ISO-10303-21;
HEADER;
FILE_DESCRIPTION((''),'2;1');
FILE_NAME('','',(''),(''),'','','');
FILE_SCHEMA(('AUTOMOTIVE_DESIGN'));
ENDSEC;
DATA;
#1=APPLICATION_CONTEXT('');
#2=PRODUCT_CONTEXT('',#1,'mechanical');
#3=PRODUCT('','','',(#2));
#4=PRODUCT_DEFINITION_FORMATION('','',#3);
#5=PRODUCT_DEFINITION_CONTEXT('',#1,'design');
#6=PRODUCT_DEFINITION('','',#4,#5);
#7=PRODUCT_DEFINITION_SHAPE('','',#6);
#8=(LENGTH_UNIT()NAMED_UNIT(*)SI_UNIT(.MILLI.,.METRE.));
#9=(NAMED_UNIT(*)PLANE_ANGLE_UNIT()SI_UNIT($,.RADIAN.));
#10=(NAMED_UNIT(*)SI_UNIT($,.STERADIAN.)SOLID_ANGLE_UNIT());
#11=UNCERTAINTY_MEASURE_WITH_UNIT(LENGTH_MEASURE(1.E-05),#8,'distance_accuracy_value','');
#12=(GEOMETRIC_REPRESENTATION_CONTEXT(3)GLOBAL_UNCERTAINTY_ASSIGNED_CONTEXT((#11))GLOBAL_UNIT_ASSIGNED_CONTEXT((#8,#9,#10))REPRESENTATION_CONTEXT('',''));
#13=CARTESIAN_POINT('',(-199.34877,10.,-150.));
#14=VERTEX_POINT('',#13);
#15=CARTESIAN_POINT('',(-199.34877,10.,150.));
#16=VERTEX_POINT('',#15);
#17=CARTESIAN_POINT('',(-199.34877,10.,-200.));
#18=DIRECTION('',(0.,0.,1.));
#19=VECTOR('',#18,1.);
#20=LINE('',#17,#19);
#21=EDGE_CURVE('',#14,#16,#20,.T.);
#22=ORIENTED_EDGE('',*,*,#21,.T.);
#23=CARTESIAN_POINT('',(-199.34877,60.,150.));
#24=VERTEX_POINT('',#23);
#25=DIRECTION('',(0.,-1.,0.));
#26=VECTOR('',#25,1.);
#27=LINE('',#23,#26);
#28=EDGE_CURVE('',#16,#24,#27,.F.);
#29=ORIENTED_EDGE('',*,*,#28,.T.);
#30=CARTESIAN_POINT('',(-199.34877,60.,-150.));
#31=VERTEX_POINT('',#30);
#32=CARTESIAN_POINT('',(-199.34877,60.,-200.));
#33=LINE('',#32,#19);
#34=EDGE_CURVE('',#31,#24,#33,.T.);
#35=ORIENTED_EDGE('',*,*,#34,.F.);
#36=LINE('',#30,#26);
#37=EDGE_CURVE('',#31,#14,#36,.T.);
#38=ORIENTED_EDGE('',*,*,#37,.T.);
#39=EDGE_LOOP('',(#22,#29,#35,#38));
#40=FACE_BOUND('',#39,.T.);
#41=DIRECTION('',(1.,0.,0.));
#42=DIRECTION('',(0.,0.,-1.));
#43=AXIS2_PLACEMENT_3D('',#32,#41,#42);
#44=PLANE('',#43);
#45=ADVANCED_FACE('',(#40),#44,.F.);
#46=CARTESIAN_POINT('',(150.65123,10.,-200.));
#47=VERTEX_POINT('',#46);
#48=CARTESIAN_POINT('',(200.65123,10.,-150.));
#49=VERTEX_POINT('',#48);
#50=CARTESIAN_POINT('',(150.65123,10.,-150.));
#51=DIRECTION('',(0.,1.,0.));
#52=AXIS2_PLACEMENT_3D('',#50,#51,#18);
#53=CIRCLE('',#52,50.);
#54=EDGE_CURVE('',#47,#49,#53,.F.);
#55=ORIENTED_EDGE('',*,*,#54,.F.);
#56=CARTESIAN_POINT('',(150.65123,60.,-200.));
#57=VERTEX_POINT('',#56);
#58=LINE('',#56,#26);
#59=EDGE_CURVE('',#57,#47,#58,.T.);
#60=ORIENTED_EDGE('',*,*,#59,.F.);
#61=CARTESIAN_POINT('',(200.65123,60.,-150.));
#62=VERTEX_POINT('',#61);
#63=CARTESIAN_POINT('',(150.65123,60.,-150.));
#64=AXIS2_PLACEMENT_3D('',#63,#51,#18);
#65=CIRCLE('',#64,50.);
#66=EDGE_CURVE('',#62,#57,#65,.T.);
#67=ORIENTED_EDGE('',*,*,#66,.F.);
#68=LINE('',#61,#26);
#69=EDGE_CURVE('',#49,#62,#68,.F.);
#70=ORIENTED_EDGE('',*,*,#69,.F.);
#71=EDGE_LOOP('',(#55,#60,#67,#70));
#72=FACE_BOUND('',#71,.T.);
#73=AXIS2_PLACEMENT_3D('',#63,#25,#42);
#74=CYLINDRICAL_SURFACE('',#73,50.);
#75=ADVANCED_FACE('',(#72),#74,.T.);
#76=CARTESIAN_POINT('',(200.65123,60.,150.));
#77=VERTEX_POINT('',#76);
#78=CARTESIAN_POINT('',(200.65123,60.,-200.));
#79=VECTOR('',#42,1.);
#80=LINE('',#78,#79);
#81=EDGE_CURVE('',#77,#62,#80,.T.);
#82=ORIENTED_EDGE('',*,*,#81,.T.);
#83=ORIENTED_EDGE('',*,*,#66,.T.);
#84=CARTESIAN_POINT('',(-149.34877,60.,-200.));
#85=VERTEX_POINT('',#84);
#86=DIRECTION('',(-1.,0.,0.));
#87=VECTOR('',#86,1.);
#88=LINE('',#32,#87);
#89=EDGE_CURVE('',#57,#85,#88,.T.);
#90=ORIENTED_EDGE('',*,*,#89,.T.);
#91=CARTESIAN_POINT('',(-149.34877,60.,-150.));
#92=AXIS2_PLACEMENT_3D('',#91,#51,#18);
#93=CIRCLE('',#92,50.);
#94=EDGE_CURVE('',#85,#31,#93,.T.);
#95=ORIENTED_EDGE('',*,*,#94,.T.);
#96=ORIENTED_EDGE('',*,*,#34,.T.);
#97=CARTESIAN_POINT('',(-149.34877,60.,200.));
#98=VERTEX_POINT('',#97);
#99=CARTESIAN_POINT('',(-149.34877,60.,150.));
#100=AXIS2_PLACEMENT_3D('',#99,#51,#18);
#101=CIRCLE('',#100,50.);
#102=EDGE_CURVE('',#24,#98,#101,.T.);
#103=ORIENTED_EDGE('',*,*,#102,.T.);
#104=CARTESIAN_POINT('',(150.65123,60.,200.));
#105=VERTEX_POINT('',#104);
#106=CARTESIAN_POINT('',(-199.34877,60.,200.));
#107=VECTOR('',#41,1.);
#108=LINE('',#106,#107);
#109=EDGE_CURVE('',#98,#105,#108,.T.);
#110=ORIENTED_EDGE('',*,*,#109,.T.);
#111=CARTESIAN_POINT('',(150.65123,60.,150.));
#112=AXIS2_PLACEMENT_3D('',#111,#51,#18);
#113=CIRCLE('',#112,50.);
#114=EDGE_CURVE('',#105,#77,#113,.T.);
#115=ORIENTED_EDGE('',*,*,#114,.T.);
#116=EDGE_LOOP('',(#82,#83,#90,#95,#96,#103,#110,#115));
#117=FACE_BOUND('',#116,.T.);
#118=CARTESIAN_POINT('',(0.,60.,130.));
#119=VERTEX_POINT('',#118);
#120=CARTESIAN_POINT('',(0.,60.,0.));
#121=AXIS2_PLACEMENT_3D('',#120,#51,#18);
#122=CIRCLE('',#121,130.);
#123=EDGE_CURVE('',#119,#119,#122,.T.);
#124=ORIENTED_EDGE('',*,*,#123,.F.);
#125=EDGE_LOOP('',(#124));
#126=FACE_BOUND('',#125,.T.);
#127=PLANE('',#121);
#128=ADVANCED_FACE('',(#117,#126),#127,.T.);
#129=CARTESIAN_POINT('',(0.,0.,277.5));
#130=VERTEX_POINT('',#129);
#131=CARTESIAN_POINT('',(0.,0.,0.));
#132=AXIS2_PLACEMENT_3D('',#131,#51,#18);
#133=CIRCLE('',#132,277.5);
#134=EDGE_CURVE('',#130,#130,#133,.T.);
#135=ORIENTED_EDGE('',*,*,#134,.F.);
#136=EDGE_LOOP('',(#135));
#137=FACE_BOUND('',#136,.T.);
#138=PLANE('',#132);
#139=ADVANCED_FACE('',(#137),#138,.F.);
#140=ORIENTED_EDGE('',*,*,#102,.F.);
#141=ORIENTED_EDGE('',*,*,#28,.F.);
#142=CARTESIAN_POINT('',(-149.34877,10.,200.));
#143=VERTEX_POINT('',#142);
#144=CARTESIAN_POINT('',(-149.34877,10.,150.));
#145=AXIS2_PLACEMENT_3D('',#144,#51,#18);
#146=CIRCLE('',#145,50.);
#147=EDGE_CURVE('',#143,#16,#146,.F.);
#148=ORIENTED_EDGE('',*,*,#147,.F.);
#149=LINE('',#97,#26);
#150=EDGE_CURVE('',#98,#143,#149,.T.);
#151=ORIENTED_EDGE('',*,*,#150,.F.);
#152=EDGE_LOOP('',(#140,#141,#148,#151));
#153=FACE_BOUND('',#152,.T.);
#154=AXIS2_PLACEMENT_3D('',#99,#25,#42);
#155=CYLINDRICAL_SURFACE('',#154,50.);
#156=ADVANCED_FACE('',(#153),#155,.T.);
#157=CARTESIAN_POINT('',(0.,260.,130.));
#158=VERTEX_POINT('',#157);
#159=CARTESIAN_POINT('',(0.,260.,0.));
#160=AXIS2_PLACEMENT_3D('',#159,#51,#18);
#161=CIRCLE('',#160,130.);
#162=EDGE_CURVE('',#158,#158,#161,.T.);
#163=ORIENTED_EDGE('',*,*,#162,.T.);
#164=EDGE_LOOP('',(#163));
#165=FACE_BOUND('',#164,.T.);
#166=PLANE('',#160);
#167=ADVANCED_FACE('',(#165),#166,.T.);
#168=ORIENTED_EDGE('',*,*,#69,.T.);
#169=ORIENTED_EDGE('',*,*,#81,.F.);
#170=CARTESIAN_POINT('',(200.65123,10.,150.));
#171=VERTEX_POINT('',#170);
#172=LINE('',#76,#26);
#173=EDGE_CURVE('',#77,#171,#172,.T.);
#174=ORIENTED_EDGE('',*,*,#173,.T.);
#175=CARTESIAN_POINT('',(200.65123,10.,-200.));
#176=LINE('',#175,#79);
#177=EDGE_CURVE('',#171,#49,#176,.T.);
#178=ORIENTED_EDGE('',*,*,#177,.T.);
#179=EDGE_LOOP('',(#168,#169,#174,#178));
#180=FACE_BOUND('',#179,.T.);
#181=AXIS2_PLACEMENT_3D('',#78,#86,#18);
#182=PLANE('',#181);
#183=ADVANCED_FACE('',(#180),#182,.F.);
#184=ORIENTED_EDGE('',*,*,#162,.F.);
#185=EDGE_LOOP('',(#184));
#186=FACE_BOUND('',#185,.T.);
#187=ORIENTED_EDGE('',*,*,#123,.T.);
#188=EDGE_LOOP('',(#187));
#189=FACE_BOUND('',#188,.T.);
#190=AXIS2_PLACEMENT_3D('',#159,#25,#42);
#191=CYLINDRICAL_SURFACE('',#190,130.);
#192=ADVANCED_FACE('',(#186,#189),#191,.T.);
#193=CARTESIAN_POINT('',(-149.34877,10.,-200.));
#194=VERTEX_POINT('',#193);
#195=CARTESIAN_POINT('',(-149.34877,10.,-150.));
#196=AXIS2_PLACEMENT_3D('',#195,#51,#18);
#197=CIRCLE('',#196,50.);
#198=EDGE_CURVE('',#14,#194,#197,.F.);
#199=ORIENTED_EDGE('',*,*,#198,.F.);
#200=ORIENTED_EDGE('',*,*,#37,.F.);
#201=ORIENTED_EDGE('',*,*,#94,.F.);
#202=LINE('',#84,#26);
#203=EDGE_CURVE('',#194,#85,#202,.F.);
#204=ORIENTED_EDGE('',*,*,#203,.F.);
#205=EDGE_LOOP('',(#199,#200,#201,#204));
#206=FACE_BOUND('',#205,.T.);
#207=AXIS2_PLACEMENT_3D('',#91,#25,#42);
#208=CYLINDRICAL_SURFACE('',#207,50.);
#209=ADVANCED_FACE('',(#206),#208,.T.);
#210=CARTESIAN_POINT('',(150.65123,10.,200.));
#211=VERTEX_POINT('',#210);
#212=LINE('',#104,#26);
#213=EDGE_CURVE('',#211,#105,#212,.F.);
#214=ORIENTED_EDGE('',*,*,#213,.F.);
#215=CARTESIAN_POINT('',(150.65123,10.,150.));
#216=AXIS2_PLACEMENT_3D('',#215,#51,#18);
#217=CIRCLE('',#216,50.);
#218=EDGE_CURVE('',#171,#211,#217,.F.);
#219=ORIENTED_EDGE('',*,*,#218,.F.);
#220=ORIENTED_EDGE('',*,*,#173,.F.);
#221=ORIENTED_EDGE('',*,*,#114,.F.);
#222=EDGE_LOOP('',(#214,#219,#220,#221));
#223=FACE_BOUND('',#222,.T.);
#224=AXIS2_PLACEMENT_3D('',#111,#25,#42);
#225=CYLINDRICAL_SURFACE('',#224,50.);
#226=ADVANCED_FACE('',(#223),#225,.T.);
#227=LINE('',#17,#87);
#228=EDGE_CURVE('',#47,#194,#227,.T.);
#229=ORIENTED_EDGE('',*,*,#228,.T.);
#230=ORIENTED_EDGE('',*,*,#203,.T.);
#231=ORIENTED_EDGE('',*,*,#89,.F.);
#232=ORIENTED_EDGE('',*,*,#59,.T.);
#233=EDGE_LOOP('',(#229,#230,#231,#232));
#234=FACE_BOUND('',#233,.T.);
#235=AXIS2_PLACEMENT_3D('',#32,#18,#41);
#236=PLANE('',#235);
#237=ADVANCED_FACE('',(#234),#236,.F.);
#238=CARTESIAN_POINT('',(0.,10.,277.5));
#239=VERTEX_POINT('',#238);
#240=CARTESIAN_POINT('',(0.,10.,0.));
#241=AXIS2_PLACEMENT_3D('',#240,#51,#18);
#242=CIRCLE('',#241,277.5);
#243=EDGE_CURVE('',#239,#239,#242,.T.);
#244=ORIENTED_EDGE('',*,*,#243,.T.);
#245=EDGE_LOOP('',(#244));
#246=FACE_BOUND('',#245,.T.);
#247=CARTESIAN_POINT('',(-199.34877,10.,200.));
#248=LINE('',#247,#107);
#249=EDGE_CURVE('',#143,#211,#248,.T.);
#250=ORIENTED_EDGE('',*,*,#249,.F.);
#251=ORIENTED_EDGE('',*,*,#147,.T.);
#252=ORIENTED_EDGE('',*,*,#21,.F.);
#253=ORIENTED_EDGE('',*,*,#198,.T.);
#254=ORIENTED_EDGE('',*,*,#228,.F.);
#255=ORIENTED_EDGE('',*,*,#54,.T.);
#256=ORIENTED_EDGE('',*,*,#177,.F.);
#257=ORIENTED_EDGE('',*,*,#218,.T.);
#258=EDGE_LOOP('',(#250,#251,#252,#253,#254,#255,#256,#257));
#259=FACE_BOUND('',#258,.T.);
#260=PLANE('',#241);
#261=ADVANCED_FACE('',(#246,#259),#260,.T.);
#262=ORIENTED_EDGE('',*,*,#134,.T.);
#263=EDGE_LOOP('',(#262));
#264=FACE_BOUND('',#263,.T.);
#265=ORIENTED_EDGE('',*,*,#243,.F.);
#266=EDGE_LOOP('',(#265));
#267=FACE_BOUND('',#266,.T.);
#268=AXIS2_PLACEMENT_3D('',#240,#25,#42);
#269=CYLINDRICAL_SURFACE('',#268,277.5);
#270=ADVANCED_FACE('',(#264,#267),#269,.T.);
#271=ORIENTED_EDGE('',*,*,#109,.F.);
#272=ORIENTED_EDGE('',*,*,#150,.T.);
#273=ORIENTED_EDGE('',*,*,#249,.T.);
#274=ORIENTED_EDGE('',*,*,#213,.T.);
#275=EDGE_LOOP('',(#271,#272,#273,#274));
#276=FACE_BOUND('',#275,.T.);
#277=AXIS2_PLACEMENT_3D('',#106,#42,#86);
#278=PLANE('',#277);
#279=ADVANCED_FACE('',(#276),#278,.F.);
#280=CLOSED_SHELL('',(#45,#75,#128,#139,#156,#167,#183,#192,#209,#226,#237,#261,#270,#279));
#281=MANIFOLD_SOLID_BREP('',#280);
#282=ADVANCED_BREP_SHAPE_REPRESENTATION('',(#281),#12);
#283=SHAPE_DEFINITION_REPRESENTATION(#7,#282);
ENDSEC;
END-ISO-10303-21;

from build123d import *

# Parameters (mm, degrees)
SKETCH1_R           = 277.5
BOSS_EXTRUDE1_DEPTH = 10
SKETCH2_W           = 400
SKETCH2_H           = 400
BOSS_EXTRUDE2_DEPTH = 50
FILLET1_R           = 50
SKETCH3_R           = 130
BOSS_EXTRUDE3_DEPTH = 200


with BuildPart() as part:
    # Sketch1 → Boss-Extrude1 (new body)
    with BuildSketch(Plane(origin=(0, 0, 0), x_dir=(1, 0, 0), z_dir=(0, 1, 0))):
        with Locations(Location((0, 0, 0), (0, 0, 270))):
            Circle(SKETCH1_R)
    extrude(amount=BOSS_EXTRUDE1_DEPTH)

    # Sketch2 → Boss-Extrude2 (add)
    with BuildSketch(Plane(origin=(0, 10, 0), x_dir=(1, 0, 0), z_dir=(0, 1, 0))):
        with Locations((0.651230283, 0)):
            Rectangle(SKETCH2_W, SKETCH2_H)
    extrude(amount=BOSS_EXTRUDE2_DEPTH)

    # Fillet1
    # the kernel refuses this fillet: 50 mm, written as the material it takes off along each edge
    with BuildSketch(Plane(origin=(200.651230283, 10, 200), x_dir=(-1, 0, 0), z_dir=(0, 1, 0))) as fillet1_piece_1:
        with BuildLine():
            CenterArc((FILLET1_R, -FILLET1_R), FILLET1_R, 90, 90)
            Line((0, -FILLET1_R), (0, 0))
            Line((0, 0), (FILLET1_R, 0))
        make_face()
    extrude(amount=175, mode=Mode.SUBTRACT)
    with BuildSketch(Plane(origin=(200.651230283, 10, -200), x_dir=(-1, 0, 0), z_dir=(0, 1, 0)), Plane(origin=(-199.348769717, 10, -200), x_dir=(0, 0, 1), z_dir=(0, 1, 0)), Plane(origin=(-199.348769717, 10, 200), x_dir=(1, 0, 0), z_dir=(0, 1, 0))) as fillet1_piece_2:
        with BuildLine():
            CenterArc((FILLET1_R, FILLET1_R), FILLET1_R, 180, 90)
            Line((0, FILLET1_R), (0, 0))
            Line((0, 0), (FILLET1_R, 0))
        make_face()
    extrude(amount=175, mode=Mode.SUBTRACT)

    # Sketch3 → Boss-Extrude3 (add)
    with BuildSketch(Plane(origin=(0, 60, 0), x_dir=(1, 0, 0), z_dir=(0, 1, 0))):
        with Locations(Location((0, 0, 0), (0, 0, 270))):
            Circle(SKETCH3_R)
    extrude(amount=BOSS_EXTRUDE3_DEPTH)


solid = part.part
